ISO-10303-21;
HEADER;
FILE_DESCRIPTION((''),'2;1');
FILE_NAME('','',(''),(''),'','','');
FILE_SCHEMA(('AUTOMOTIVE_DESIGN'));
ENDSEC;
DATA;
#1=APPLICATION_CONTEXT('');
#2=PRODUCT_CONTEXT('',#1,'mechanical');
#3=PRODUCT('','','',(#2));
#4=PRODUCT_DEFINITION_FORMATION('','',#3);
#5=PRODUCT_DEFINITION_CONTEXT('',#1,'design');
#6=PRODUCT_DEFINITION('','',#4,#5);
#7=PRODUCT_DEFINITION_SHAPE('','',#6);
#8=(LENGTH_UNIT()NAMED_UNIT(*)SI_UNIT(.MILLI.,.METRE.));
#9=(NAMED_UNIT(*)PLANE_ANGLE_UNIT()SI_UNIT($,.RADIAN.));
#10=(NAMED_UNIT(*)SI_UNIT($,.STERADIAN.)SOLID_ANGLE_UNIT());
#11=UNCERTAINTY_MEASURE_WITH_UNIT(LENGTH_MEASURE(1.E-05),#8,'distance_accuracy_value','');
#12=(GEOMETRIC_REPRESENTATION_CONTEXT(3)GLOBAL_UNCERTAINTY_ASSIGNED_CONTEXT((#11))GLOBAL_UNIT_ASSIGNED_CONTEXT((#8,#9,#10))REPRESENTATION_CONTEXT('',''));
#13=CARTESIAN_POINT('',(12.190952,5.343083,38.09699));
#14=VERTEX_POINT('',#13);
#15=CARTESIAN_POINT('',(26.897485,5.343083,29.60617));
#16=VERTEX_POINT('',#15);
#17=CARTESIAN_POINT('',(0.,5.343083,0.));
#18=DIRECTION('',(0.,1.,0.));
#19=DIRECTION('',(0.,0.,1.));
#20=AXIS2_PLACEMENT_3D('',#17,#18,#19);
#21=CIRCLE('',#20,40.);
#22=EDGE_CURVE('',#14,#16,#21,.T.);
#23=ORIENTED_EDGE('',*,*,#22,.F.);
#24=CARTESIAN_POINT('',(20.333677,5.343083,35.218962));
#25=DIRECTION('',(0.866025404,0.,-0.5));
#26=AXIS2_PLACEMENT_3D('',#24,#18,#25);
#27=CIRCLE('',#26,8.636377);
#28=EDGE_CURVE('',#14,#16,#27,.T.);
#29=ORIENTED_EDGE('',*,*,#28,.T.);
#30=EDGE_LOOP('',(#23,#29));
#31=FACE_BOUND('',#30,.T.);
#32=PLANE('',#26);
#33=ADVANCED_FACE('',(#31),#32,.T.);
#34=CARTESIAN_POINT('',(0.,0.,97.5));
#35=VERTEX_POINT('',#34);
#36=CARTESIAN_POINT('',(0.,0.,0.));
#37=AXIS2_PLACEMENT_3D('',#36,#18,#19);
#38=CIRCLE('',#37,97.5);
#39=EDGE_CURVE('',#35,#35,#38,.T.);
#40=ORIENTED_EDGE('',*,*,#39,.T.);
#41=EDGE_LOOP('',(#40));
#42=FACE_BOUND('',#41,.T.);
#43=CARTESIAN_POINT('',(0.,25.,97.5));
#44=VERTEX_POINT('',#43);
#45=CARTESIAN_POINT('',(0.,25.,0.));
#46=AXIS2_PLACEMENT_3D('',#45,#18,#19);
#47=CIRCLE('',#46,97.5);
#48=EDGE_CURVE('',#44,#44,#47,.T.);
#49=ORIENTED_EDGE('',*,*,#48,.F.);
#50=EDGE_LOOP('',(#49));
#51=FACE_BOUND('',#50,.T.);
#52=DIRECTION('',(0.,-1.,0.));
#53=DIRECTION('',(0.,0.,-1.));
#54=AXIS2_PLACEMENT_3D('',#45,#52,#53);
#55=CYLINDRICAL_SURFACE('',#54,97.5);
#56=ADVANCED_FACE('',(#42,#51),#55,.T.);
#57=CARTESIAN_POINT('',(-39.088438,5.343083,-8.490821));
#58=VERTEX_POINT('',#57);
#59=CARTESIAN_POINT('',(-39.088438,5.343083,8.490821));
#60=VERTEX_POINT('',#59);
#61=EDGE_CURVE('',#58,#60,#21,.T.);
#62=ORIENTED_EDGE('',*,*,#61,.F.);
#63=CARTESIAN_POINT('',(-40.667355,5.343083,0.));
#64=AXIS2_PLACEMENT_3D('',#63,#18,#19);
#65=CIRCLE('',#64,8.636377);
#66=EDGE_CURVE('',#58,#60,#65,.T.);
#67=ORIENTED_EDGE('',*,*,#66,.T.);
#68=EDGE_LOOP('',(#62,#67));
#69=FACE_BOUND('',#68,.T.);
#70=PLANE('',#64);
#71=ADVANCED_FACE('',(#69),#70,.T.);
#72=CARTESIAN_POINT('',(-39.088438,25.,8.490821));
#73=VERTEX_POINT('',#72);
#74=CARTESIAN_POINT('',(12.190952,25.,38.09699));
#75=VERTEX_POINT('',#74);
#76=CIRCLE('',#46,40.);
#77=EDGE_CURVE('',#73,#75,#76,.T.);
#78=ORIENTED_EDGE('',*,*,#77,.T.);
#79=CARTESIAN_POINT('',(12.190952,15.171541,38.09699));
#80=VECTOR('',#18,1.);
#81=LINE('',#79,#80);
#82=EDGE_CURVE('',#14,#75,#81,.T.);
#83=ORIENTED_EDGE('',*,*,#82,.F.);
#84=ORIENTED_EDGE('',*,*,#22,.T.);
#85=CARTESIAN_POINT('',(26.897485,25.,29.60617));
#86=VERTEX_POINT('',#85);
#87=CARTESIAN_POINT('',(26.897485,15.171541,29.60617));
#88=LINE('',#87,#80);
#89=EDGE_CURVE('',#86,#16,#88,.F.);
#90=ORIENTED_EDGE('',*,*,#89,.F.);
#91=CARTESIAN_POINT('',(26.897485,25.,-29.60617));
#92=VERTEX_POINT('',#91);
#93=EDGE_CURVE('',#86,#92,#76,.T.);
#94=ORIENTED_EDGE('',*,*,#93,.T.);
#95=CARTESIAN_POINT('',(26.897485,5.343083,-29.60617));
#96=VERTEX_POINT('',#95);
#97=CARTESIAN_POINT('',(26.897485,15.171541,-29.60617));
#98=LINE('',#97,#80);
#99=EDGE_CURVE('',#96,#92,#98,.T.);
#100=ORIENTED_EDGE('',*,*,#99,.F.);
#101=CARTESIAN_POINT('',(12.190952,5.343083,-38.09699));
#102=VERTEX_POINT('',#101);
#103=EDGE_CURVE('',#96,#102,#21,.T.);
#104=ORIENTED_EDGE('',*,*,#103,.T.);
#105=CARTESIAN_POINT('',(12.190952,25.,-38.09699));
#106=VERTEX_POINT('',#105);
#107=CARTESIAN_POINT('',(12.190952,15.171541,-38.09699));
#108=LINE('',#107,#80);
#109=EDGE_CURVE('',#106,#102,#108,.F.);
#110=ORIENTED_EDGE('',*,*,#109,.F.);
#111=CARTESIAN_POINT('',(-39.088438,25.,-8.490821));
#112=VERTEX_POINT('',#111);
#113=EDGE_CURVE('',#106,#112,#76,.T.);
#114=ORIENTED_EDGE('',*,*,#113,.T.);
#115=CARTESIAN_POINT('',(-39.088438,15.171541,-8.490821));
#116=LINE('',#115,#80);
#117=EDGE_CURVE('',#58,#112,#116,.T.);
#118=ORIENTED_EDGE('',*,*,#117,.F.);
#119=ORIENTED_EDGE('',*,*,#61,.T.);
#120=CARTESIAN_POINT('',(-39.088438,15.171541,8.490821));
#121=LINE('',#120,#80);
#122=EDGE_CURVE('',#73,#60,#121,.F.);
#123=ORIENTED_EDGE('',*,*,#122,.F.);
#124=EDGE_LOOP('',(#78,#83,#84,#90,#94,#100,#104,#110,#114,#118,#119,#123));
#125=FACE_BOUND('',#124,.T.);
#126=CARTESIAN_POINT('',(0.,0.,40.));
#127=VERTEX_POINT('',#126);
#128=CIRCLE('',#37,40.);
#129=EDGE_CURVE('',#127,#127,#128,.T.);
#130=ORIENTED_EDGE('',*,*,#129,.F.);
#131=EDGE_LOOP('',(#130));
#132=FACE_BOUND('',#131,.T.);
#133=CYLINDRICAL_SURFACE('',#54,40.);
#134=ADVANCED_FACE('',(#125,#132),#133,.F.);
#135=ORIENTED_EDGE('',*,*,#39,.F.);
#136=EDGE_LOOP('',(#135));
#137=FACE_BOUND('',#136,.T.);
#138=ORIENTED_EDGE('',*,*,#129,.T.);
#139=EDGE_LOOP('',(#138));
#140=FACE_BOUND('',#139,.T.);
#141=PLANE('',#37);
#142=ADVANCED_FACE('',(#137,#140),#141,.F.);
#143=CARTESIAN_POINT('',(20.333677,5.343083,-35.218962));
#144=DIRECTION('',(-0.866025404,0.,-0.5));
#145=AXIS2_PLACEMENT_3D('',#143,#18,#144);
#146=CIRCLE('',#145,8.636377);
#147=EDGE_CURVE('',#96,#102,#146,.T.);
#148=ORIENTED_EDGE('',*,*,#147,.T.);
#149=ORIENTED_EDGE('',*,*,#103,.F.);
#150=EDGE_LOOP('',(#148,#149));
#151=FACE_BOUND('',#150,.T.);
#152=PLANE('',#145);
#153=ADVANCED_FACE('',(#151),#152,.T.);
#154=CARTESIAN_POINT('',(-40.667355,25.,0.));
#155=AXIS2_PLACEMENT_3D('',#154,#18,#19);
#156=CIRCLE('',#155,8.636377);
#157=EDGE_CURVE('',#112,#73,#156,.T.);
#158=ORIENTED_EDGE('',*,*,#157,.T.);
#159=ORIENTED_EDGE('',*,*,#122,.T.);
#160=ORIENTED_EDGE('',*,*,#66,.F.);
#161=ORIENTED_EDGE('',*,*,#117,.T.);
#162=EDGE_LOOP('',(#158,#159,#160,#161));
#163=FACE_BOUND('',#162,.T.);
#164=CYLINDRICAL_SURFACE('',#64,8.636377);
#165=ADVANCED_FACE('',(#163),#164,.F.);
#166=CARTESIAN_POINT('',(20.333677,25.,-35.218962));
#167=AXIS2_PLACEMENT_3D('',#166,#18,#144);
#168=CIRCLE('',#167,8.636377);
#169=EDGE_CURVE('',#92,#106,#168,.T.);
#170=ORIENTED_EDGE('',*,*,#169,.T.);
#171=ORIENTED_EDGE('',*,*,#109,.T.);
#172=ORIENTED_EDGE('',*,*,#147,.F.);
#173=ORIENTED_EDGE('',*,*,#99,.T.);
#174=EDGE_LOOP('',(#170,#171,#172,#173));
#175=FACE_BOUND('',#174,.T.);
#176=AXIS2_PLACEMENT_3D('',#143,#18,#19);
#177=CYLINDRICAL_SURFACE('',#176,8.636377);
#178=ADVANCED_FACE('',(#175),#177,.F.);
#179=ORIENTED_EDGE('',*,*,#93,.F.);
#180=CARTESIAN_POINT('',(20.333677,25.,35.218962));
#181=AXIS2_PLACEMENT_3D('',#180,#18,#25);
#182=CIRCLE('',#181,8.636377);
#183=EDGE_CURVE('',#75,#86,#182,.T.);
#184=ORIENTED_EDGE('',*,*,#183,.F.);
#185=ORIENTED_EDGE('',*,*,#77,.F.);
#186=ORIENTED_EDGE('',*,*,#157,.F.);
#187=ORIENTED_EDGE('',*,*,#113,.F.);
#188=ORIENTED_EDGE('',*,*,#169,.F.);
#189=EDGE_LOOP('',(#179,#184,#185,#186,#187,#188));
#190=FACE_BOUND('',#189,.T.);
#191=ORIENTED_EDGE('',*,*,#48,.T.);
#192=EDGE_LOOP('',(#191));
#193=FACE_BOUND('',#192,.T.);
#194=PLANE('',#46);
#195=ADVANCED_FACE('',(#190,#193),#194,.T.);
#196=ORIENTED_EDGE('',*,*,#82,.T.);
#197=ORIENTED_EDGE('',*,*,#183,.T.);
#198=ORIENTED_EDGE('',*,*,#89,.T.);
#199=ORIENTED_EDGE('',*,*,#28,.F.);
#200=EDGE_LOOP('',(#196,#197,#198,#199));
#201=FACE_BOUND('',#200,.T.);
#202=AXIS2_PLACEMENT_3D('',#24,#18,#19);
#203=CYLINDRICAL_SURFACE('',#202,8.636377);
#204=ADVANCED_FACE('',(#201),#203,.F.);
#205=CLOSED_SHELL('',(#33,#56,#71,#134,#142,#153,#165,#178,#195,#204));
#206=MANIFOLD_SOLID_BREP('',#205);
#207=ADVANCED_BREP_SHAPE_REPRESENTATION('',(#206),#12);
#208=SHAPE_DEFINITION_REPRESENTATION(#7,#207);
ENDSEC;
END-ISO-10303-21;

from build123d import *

# Parameters (mm, degrees)
SKETCH1_R           = 97.5
BOSS_EXTRUDE1_DEPTH = 25
SKETCH2_R           = 40
CUT_EXTRUDE1_DEPTH  = 141.133864572
SKETCH3_R           = 8.636377425
CUT_EXTRUDE2_DEPTH  = 19.656917301
CIRPATTERN1_COUNT   = 3


with BuildPart() as part:
    # Sketch1 → Boss-Extrude1 (new body)
    with BuildSketch(Plane(origin=(0, 0, 0), x_dir=(1, 0, 0), z_dir=(0, 1, 0))):
        Circle(SKETCH1_R)
    extrude(amount=BOSS_EXTRUDE1_DEPTH)

    # Sketch2 → Cut-Extrude1 (cut, through all)
    with BuildSketch(Plane(origin=(0, 0, 0), x_dir=(1, 0, 0), z_dir=(0, 1, 0))):
        Circle(SKETCH2_R)
    extrude(amount=CUT_EXTRUDE1_DEPTH, mode=Mode.SUBTRACT)

    # Sketch3 → Cut-Extrude2 (cut)
    with BuildSketch(Plane(origin=(0, 25, 0), x_dir=(1, 0, 0), z_dir=(0, 1, 0))):
        with Locations((-40.667354563, 0)):
            Circle(SKETCH3_R)
    cut_extrude2 = extrude(amount=-CUT_EXTRUDE2_DEPTH, mode=Mode.SUBTRACT)

    # CirPattern1: Cut-Extrude2 ×3 about axis
    cirpattern1_axis = Axis((0, 0, 0), (0, 1, 0))
    for i in range(1, CIRPATTERN1_COUNT):
        add(cut_extrude2.rotate(cirpattern1_axis, i * 360 / CIRPATTERN1_COUNT), mode=Mode.SUBTRACT)


solid = part.part
